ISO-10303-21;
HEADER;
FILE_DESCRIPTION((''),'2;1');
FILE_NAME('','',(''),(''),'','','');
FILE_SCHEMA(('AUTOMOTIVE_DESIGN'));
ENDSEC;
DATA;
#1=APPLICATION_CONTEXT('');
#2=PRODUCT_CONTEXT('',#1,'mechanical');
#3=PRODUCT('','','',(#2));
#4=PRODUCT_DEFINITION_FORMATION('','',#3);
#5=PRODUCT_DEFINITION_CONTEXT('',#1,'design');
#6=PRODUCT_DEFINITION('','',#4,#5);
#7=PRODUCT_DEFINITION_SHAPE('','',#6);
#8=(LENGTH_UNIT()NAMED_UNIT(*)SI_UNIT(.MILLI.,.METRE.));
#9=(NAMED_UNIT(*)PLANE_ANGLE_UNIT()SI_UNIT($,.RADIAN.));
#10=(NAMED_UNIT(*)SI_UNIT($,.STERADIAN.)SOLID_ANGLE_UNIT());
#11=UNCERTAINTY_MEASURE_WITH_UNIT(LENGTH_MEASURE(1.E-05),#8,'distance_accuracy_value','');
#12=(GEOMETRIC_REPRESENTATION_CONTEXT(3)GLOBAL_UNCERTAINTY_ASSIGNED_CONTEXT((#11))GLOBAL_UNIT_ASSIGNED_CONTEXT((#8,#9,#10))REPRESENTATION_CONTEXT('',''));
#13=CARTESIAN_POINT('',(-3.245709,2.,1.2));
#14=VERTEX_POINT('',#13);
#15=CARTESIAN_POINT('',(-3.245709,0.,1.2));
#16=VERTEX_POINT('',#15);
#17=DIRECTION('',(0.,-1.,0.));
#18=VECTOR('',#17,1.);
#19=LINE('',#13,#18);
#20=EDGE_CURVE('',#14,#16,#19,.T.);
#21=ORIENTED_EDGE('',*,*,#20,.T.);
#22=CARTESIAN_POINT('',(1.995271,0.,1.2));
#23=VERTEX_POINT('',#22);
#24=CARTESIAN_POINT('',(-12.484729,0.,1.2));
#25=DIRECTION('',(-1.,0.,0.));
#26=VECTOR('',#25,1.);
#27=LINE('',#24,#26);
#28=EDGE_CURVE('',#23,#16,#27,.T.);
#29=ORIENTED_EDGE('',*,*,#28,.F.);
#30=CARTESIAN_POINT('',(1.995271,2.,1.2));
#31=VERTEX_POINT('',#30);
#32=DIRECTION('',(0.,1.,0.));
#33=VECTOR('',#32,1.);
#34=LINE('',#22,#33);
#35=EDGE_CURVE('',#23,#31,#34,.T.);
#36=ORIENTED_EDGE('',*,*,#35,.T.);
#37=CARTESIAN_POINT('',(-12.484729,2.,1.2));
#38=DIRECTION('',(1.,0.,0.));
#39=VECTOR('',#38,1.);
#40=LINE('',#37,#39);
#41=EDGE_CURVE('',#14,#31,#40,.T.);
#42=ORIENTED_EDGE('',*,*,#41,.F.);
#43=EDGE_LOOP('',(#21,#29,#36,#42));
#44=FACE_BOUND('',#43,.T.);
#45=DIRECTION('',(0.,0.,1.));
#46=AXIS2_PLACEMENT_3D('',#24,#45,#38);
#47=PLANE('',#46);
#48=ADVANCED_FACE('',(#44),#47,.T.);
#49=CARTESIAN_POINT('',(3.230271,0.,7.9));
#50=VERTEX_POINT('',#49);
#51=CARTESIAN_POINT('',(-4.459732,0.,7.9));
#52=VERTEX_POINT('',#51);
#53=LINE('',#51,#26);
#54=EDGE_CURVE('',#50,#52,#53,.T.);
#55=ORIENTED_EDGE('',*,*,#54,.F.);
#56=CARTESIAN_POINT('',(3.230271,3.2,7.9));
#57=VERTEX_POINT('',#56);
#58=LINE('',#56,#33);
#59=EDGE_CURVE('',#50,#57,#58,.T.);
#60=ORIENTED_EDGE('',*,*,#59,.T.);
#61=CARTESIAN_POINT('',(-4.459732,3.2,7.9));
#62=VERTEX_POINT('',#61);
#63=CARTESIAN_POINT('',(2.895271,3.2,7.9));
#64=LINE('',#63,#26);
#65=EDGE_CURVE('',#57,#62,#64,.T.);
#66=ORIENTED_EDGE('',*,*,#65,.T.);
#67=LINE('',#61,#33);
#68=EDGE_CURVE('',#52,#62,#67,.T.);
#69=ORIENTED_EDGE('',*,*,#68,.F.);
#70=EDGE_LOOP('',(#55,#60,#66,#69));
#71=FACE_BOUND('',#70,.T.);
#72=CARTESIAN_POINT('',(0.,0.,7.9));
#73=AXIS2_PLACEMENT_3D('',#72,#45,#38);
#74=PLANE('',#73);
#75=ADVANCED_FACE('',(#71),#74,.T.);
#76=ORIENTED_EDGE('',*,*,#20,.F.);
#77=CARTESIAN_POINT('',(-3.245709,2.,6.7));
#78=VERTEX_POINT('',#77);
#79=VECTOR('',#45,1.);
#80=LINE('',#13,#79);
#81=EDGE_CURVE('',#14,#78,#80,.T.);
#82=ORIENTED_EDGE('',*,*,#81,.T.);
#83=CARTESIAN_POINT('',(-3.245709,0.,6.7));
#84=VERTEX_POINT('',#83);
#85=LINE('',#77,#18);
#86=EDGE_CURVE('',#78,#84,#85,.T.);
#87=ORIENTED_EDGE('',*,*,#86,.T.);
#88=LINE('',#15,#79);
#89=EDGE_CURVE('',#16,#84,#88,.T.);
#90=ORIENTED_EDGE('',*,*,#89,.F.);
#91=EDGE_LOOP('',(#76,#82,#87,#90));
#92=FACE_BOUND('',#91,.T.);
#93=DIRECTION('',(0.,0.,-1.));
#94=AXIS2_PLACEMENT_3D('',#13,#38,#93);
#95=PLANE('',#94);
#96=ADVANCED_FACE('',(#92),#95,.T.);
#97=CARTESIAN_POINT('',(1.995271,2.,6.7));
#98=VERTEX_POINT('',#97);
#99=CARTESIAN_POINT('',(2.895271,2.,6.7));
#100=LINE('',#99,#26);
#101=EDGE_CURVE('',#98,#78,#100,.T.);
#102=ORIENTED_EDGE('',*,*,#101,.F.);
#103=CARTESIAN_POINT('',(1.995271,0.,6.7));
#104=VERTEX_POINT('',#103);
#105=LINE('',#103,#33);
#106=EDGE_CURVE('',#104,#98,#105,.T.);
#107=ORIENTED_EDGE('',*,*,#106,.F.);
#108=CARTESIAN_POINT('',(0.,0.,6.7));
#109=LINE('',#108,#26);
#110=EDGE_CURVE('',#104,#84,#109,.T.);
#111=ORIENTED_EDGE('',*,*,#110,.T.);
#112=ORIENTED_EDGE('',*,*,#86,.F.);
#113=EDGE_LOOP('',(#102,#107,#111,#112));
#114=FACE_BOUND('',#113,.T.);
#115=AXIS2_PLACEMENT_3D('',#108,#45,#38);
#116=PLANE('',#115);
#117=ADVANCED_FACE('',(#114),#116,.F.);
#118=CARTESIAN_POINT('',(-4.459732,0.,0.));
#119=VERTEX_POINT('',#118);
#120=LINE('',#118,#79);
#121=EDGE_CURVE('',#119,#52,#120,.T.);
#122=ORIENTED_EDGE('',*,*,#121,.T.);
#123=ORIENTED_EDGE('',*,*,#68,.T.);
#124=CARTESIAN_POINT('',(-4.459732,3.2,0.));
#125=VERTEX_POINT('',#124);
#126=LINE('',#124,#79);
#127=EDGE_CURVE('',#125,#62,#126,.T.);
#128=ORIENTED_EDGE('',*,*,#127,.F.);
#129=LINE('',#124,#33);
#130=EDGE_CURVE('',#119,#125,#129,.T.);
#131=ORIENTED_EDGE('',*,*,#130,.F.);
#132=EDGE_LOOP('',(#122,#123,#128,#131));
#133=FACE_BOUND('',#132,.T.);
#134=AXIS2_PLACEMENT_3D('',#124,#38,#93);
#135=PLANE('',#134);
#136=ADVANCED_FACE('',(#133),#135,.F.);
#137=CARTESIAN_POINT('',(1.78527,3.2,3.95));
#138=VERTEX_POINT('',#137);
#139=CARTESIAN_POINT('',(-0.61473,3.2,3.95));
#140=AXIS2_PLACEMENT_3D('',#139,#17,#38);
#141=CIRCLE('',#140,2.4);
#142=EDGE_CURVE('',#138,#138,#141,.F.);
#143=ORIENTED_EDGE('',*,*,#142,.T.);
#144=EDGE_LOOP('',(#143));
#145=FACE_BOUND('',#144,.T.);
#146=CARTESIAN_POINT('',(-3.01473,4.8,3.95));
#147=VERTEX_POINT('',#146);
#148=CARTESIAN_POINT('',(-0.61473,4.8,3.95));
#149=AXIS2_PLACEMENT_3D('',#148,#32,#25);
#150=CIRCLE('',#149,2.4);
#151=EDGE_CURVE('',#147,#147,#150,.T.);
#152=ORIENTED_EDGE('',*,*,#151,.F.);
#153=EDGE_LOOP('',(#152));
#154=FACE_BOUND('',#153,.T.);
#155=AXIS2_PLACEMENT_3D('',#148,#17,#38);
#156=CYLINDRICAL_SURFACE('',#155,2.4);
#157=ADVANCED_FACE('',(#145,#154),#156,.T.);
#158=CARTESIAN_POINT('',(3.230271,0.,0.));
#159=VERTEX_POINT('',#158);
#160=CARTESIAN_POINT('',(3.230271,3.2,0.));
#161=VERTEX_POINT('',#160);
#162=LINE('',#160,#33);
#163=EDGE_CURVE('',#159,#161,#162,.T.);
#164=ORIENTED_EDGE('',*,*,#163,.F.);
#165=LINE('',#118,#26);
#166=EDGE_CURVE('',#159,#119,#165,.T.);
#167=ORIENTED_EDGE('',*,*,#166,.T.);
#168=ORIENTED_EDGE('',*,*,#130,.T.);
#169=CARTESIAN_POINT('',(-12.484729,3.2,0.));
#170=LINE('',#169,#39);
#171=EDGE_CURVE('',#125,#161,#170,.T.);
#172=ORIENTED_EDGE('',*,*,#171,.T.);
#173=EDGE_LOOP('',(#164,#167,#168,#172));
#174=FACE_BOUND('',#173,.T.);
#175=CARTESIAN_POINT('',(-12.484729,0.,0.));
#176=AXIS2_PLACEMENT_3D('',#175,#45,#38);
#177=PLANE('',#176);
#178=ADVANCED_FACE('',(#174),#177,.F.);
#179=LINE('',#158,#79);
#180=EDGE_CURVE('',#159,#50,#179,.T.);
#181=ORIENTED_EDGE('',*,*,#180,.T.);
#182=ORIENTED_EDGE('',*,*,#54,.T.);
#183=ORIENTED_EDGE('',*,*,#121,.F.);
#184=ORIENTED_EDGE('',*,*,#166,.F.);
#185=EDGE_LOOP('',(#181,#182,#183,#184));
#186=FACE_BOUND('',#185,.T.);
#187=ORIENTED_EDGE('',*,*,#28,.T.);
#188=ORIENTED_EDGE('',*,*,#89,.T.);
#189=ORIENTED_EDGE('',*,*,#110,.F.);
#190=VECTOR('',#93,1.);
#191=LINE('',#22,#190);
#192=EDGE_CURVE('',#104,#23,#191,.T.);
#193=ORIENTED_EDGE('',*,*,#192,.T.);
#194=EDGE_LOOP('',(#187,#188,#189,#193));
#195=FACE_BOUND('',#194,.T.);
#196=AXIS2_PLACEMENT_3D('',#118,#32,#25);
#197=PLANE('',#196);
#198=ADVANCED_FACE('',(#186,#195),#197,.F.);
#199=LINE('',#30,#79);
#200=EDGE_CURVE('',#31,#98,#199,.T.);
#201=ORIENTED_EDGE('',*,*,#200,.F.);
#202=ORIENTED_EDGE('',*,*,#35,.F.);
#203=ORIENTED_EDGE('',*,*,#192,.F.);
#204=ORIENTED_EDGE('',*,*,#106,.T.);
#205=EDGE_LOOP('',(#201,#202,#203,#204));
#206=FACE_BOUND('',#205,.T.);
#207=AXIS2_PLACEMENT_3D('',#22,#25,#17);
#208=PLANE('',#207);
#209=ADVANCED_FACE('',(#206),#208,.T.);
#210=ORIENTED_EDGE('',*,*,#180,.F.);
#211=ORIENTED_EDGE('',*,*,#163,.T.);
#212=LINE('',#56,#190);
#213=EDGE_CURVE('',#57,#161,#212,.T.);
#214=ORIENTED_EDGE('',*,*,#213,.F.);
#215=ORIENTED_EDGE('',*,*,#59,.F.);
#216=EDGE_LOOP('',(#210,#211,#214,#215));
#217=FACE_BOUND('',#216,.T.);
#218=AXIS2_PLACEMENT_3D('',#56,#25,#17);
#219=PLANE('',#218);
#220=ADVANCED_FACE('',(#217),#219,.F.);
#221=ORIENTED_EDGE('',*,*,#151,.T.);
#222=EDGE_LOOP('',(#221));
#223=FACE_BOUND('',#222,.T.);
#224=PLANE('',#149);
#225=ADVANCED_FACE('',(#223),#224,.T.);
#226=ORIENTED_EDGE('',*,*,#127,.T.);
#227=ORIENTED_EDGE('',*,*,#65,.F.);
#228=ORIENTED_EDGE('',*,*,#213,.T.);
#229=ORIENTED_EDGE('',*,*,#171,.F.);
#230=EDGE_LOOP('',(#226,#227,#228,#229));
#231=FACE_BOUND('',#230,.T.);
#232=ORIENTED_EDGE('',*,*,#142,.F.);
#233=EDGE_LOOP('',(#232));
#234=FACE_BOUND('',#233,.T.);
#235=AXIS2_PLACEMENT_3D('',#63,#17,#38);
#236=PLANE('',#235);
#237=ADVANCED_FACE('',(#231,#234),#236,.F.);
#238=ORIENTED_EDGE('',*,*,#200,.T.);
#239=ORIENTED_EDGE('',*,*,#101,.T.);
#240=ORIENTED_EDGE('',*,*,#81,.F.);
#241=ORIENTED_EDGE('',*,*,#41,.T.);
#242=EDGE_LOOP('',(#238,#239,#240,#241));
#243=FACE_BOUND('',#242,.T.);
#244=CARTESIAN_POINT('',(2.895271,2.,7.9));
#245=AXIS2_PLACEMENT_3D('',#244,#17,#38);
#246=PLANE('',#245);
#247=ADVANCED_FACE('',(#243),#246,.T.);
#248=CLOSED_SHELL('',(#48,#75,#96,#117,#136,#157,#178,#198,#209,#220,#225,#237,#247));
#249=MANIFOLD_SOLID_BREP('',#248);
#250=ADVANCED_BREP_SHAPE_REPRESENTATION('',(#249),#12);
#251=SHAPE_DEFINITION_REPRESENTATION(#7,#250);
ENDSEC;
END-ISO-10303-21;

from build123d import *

# Parameters (mm, degrees)
BASEFRAMESKETCH_W    = 15.38
BASEFRAMESKETCH_H    = 3.2
BASEFRAME_DEPTH      = 7.9
SKETCH29_W           = 15.38
SKETCH29_H           = 7.9
CUT_EXTRUDE4_DEPTH   = 16.116827041
SKETCH31_R           = 2.197938665
BOSS_EXTRUDE6_DEPTH  = 1.6
LPATTERN4_COUNT      = 2
LPATTERN4_PITCH      = 8
SHELL1_T             = -1.2
BOSS_EXTRUDE7_DEPTH  = 2.3
CUT_EXTRUDE7_DEPTH   = 2.3
FILLET3_R            = 0.1
FILLET4_R            = 0.1
SKETCH38_W           = 7.69
SKETCH38_H           = 7.9
CUT_EXTRUDE8_DEPTH   = 4
BOSS_EXTRUDE16_START = 0.8
SKETCH44_R           = 0.997938665
BOSS_EXTRUDE16_DEPTH = 0.8
BOSS_EXTRUDE17_REACH = 13.769
SKETCH39_W           = 1.2
SKETCH39_H           = 5.5
CUT_EXTRUDE10_DEPTH  = 12.768845427
SKETCH46_W           = 0.335
SKETCH46_H           = 3.2
SKETCH100_W          = 0.349019596
SKETCH100_H          = 5.5
SKETCH101_W          = 0.3
SKETCH101_H          = 5.5
CUT_EXTRUDE27_DEPTH  = 11.500279785
SKETCH104_W          = 1.97
SKETCH104_H          = 1.97
CUT_EXTRUDE28_DEPTH  = 1.6
MOVE_FACE1_BY        = 3.3
CUT_EXTRUDE42_DEPTH  = 14.215613325
SKETCH118_R          = 2.4
SKETCH118_R_2        = 1.8
BOSS_EXTRUDE26_DEPTH = 1.6
SKETCH119_R          = 1.8
CUT_EXTRUDE43_DEPTH  = 12.160161573
SKETCH120_W          = 7.69000258
SKETCH120_H          = 3.3
CUT_EXTRUDE44_DEPTH  = 11.263488994
SKETCH121_R          = 1.8
BOSS_EXTRUDE27_DEPTH = 2.8


with BuildPart() as part:
    # BaseFrameSketch → BaseFrame (new, symmetric)
    with BuildSketch(Plane.XY):
        with Locations((-4.794729064, 1.6)):
            Rectangle(BASEFRAMESKETCH_W, BASEFRAMESKETCH_H)
    extrude(amount=BASEFRAME_DEPTH, both=True)

    # Sketch29 → Cut-Extrude4 (cut, through all)
    with BuildSketch(Plane(origin=(0, 3.2, 0), x_dir=(1, 0, 0), z_dir=(0, 1, 0))):
        with Locations((-4.794729064, 3.95)):
            Rectangle(SKETCH29_W, SKETCH29_H)
    extrude(amount=-CUT_EXTRUDE4_DEPTH, mode=Mode.SUBTRACT)

    # Sketch31 → Boss-Extrude6 (add)
    with BuildSketch(Plane(origin=(0, 3.2, 0), x_dir=(1, 0, 0), z_dir=(0, 1, 0))):
        with Locations((-8.584729064, -4)):
            Circle(SKETCH31_R)
    boss_extrude6 = extrude(amount=BOSS_EXTRUDE6_DEPTH)

    # LPattern4: Boss-Extrude6 ×2
    with Locations(*[(i * LPATTERN4_PITCH, 0, 0) for i in range(1, LPATTERN4_COUNT)]):
        add(boss_extrude6)

    # Shell1
    shell1_openings = [part.faces().sort_by_distance(p)[0] for p in [
        (-4.794729064, 0, 3.95),
    ]]
    offset(amount=SHELL1_T, openings=shell1_openings, kind=Kind.INTERSECTION)

    # Sketch35 → Boss-Extrude7 (add, symmetric)
    with BuildSketch(Plane.XY.offset(3.95)):
        with BuildLine():
            Line((-2.782667729, 3.2), (1.613209601, 3.2))
            ThreePointArc((1.613209601, 3.2), (1.721005084, 3.313571782), (1.810586387, 3.441999215))
            ThreePointArc((1.810586387, 3.441999215), (2.278525574, 4.313545175), (2.440270936, 5.289453921))
            ThreePointArc((2.440270936, 5.289453921), (2.428474077, 6.289536316), (2.360954202, 7.287406564))
            Line((2.360954202, 7.287406564), (1.106266226, 7.287406564))
            ThreePointArc((1.106266226, 7.287406564), (1.22292125, 6.096651625), (1.106266226, 4.905896686))
            ThreePointArc((1.106266226, 4.905896686), (-0.584729064, 4.033269084), (-2.275724354, 4.905896686))
            ThreePointArc((-2.275724354, 4.905896686), (-2.392379378, 6.096651625), (-2.275724354, 7.287406564))
            Line((-2.275724354, 7.287406564), (-3.53041233, 7.287406564))
            ThreePointArc((-3.53041233, 7.287406564), (-3.597932205, 6.289536316), (-3.609729064, 5.289453921))
            ThreePointArc((-3.609729064, 5.289453921), (-3.447983702, 4.313545175), (-2.980044515, 3.441999215))
            ThreePointArc((-2.980044515, 3.441999215), (-2.890463212, 3.313571782), (-2.782667729, 3.2))
        make_face()
    extrude(amount=BOSS_EXTRUDE7_DEPTH, both=True)

    # Sketch36 → Cut-Extrude7 (cut, symmetric)
    with BuildSketch(Plane.XY.offset(3.95)):
        with BuildLine():
            Line((-2.195211087, 4.8), (1.025752959, 4.8))
            ThreePointArc((1.025752959, 4.8), (-0.584729064, 4.033269084), (-2.195211087, 4.8))
        make_face()
    extrude(amount=CUT_EXTRUDE7_DEPTH, both=True, mode=Mode.SUBTRACT)

    # Fillet3
    fillet3_edges = [part.edges().sort_by_distance(p)[0] for p in [
        (-2.275724354, 4.905896686, 3.95),
    ]]
    fillet(fillet3_edges, radius=FILLET3_R)

    # Fillet4
    fillet4_edges = [part.edges().sort_by_distance(p)[0] for p in [
        (1.106266226, 4.905896686, 3.95),
    ]]
    fillet(fillet4_edges, radius=FILLET4_R)

    # Sketch38 → Cut-Extrude8 (cut, symmetric)
    with BuildSketch(Plane(origin=(0, 3.2, 0), x_dir=(1, 0, 0), z_dir=(0, 1, 0))):
        with Locations((-8.639729064, -3.95)):
            Rectangle(SKETCH38_W, SKETCH38_H)
    extrude(amount=CUT_EXTRUDE8_DEPTH, both=True, mode=Mode.SUBTRACT)

    # Sketch44 → Boss-Extrude16 (add)
    with BuildSketch(Plane.XZ.offset(-3.2).offset(BOSS_EXTRUDE16_START)):
        with Locations((-0.584729064, 4)):
            Circle(SKETCH44_R)
    extrude(amount=-BOSS_EXTRUDE16_DEPTH)

    # Sketch39 → Boss-Extrude17 (add, up to next)
    with BuildSketch(Plane(origin=(0, 0, 0), x_dir=(-1, 0, 0), z_dir=(0, -1, 0)), mode=Mode.PRIVATE) as boss_extrude17_sk1:
        with Locations((4.194729064, -3.95)):
            Rectangle(SKETCH39_W, SKETCH39_H)
    boss_extrude17_tool1 = extrude(boss_extrude17_sk1.sketch, amount=-BOSS_EXTRUDE17_REACH, mode=Mode.PRIVATE) - part.part
    add(boss_extrude17_tool1.solids().sort_by_distance((-4.194729, 0, 3.95))[0])

    # Sketch45 → Cut-Extrude10 (cut, through all)
    with BuildSketch(Plane.XY.offset(7.9)):
        Polygon((-4.794729064, 3.2), (-4.459731644, 3.2), (-4.459731644, 0), (-4.794729064, -0.001314844), align=None)
    extrude(amount=-CUT_EXTRUDE10_DEPTH, mode=Mode.SUBTRACT)

    # Sweep9: sweep along a curve in space
    with BuildLine() as sweep9_path:
        Line((2.895270936, 3.2, 7.9), (2.895270936, 3.2, 0))
    # Sketch46 → Sweep9 (sweep)
    with BuildSketch(Plane.XY.offset(7.9)):
        with Locations((3.062770936, 1.6)):
            Rectangle(SKETCH46_W, SKETCH46_H)
    sweep(path=sweep9_path.line)

    # Sweep24: sweep along a curve in space
    with BuildLine() as sweep24_path:
        Line((-3.594729064, 2, 6.7), (-3.594729064, 0, 6.7))
    # Sketch100 → Sweep24 (sweep)
    with BuildSketch(Plane(origin=(0, 2, 0), x_dir=(-1, 0, 0), z_dir=(0, -1, 0))):
        with Locations((3.420219266, -3.95)):
            Rectangle(SKETCH100_W, SKETCH100_H)
    sweep(path=sweep24_path.line)

    # Sketch101 → Cut-Extrude27 (cut, through all)
    with BuildSketch(Plane(origin=(0, 2, 0), x_dir=(-1, 0, 0), z_dir=(0, -1, 0))):
        with Locations((-1.845270936, -3.95)):
            Rectangle(SKETCH101_W, SKETCH101_H)
    extrude(amount=CUT_EXTRUDE27_DEPTH, mode=Mode.SUBTRACT)

    # Sketch104 → Cut-Extrude28 (cut)
    with BuildSketch(Plane(origin=(0, 2, 0), x_dir=(-1, 0, 0), z_dir=(0, -1, 0))):
        with Locations((0.625219266, -3.95)):
            Rectangle(SKETCH104_W, SKETCH104_H)
    extrude(amount=-CUT_EXTRUDE28_DEPTH, mode=Mode.SUBTRACT)

    # Sweep27: sweep along a curve in space
    with BuildLine() as sweep27_path:
        Line((0.359780734, 2, 3.677846589), (0.359780734, 2.4, 3.677846589))
    # Sketch105 → Sweep27 (sweep)
    with BuildSketch(Plane(origin=(0, 2, 0), x_dir=(-1, 0, 0), z_dir=(0, -1, 0))):
        with BuildLine():
            Line((-0.359780734, -3.677846589), (-0.359780734, -4.322153411))
            ThreePointArc((-0.359780734, -4.322153411), (-0.413209601, -4), (-0.359780734, -3.677846589))
        make_face()
        with BuildLine():
            Line((0.933522096, -4.935), (0.235936032, -4.935))
            ThreePointArc((0.235936032, -4.935), (0.584729064, -4.997938665), (0.933522096, -4.935))
        make_face()
    sweep(path=sweep27_path.line)

    # Move Face1: a face moved outward by 3.3
    extrude(part.faces().sort_by_distance((-0.614730354, 0, 0.79))[0], amount=MOVE_FACE1_BY, dir=(0, -1, 0))

    # Sketch115 → Cut-Extrude42 (cut, through all)
    with BuildSketch(Plane.ZY.offset(4.459731644)):
        Polygon((0, 3.2), (7.9, 3.2), (7.9, 7.494096257), (-0.222033581, 7.422914641), (-0.222033581, 3.2), align=None)
    extrude(amount=-CUT_EXTRUDE42_DEPTH, mode=Mode.SUBTRACT)

    # Sketch118 → Boss-Extrude26 (add)
    with BuildSketch(Plane(origin=(0, 3.2, 0), x_dir=(1, 0, 0), z_dir=(0, 1, 0))):
        with Locations((-0.614730354, -3.95)):
            Circle(SKETCH118_R)
        with Locations((-0.614730354, -3.95)):
            Circle(SKETCH118_R_2, mode=Mode.SUBTRACT)
    extrude(amount=BOSS_EXTRUDE26_DEPTH)

    # Sketch119 → Cut-Extrude43 (cut, through all)
    with BuildSketch(Plane(origin=(0, 3.2, 0), x_dir=(1, 0, 0), z_dir=(0, 1, 0))):
        with Locations((-0.614730354, -3.95)):
            Circle(SKETCH119_R)
    extrude(amount=-CUT_EXTRUDE43_DEPTH, mode=Mode.SUBTRACT)

    # Sketch120 → Cut-Extrude44 (cut, through all)
    with BuildSketch(Plane.XY.offset(7.9)):
        with Locations((-0.614730354, -1.65)):
            Rectangle(SKETCH120_W, SKETCH120_H)
    extrude(amount=-CUT_EXTRUDE44_DEPTH, mode=Mode.SUBTRACT)

    # Sketch121 → Boss-Extrude27 (add)
    with BuildSketch(Plane(origin=(0, 2, 0), x_dir=(-1, 0, 0), z_dir=(0, -1, 0))):
        with Locations((0.614730354, -3.95)):
            Circle(SKETCH121_R)
    extrude(amount=-BOSS_EXTRUDE27_DEPTH)


solid = part.part
